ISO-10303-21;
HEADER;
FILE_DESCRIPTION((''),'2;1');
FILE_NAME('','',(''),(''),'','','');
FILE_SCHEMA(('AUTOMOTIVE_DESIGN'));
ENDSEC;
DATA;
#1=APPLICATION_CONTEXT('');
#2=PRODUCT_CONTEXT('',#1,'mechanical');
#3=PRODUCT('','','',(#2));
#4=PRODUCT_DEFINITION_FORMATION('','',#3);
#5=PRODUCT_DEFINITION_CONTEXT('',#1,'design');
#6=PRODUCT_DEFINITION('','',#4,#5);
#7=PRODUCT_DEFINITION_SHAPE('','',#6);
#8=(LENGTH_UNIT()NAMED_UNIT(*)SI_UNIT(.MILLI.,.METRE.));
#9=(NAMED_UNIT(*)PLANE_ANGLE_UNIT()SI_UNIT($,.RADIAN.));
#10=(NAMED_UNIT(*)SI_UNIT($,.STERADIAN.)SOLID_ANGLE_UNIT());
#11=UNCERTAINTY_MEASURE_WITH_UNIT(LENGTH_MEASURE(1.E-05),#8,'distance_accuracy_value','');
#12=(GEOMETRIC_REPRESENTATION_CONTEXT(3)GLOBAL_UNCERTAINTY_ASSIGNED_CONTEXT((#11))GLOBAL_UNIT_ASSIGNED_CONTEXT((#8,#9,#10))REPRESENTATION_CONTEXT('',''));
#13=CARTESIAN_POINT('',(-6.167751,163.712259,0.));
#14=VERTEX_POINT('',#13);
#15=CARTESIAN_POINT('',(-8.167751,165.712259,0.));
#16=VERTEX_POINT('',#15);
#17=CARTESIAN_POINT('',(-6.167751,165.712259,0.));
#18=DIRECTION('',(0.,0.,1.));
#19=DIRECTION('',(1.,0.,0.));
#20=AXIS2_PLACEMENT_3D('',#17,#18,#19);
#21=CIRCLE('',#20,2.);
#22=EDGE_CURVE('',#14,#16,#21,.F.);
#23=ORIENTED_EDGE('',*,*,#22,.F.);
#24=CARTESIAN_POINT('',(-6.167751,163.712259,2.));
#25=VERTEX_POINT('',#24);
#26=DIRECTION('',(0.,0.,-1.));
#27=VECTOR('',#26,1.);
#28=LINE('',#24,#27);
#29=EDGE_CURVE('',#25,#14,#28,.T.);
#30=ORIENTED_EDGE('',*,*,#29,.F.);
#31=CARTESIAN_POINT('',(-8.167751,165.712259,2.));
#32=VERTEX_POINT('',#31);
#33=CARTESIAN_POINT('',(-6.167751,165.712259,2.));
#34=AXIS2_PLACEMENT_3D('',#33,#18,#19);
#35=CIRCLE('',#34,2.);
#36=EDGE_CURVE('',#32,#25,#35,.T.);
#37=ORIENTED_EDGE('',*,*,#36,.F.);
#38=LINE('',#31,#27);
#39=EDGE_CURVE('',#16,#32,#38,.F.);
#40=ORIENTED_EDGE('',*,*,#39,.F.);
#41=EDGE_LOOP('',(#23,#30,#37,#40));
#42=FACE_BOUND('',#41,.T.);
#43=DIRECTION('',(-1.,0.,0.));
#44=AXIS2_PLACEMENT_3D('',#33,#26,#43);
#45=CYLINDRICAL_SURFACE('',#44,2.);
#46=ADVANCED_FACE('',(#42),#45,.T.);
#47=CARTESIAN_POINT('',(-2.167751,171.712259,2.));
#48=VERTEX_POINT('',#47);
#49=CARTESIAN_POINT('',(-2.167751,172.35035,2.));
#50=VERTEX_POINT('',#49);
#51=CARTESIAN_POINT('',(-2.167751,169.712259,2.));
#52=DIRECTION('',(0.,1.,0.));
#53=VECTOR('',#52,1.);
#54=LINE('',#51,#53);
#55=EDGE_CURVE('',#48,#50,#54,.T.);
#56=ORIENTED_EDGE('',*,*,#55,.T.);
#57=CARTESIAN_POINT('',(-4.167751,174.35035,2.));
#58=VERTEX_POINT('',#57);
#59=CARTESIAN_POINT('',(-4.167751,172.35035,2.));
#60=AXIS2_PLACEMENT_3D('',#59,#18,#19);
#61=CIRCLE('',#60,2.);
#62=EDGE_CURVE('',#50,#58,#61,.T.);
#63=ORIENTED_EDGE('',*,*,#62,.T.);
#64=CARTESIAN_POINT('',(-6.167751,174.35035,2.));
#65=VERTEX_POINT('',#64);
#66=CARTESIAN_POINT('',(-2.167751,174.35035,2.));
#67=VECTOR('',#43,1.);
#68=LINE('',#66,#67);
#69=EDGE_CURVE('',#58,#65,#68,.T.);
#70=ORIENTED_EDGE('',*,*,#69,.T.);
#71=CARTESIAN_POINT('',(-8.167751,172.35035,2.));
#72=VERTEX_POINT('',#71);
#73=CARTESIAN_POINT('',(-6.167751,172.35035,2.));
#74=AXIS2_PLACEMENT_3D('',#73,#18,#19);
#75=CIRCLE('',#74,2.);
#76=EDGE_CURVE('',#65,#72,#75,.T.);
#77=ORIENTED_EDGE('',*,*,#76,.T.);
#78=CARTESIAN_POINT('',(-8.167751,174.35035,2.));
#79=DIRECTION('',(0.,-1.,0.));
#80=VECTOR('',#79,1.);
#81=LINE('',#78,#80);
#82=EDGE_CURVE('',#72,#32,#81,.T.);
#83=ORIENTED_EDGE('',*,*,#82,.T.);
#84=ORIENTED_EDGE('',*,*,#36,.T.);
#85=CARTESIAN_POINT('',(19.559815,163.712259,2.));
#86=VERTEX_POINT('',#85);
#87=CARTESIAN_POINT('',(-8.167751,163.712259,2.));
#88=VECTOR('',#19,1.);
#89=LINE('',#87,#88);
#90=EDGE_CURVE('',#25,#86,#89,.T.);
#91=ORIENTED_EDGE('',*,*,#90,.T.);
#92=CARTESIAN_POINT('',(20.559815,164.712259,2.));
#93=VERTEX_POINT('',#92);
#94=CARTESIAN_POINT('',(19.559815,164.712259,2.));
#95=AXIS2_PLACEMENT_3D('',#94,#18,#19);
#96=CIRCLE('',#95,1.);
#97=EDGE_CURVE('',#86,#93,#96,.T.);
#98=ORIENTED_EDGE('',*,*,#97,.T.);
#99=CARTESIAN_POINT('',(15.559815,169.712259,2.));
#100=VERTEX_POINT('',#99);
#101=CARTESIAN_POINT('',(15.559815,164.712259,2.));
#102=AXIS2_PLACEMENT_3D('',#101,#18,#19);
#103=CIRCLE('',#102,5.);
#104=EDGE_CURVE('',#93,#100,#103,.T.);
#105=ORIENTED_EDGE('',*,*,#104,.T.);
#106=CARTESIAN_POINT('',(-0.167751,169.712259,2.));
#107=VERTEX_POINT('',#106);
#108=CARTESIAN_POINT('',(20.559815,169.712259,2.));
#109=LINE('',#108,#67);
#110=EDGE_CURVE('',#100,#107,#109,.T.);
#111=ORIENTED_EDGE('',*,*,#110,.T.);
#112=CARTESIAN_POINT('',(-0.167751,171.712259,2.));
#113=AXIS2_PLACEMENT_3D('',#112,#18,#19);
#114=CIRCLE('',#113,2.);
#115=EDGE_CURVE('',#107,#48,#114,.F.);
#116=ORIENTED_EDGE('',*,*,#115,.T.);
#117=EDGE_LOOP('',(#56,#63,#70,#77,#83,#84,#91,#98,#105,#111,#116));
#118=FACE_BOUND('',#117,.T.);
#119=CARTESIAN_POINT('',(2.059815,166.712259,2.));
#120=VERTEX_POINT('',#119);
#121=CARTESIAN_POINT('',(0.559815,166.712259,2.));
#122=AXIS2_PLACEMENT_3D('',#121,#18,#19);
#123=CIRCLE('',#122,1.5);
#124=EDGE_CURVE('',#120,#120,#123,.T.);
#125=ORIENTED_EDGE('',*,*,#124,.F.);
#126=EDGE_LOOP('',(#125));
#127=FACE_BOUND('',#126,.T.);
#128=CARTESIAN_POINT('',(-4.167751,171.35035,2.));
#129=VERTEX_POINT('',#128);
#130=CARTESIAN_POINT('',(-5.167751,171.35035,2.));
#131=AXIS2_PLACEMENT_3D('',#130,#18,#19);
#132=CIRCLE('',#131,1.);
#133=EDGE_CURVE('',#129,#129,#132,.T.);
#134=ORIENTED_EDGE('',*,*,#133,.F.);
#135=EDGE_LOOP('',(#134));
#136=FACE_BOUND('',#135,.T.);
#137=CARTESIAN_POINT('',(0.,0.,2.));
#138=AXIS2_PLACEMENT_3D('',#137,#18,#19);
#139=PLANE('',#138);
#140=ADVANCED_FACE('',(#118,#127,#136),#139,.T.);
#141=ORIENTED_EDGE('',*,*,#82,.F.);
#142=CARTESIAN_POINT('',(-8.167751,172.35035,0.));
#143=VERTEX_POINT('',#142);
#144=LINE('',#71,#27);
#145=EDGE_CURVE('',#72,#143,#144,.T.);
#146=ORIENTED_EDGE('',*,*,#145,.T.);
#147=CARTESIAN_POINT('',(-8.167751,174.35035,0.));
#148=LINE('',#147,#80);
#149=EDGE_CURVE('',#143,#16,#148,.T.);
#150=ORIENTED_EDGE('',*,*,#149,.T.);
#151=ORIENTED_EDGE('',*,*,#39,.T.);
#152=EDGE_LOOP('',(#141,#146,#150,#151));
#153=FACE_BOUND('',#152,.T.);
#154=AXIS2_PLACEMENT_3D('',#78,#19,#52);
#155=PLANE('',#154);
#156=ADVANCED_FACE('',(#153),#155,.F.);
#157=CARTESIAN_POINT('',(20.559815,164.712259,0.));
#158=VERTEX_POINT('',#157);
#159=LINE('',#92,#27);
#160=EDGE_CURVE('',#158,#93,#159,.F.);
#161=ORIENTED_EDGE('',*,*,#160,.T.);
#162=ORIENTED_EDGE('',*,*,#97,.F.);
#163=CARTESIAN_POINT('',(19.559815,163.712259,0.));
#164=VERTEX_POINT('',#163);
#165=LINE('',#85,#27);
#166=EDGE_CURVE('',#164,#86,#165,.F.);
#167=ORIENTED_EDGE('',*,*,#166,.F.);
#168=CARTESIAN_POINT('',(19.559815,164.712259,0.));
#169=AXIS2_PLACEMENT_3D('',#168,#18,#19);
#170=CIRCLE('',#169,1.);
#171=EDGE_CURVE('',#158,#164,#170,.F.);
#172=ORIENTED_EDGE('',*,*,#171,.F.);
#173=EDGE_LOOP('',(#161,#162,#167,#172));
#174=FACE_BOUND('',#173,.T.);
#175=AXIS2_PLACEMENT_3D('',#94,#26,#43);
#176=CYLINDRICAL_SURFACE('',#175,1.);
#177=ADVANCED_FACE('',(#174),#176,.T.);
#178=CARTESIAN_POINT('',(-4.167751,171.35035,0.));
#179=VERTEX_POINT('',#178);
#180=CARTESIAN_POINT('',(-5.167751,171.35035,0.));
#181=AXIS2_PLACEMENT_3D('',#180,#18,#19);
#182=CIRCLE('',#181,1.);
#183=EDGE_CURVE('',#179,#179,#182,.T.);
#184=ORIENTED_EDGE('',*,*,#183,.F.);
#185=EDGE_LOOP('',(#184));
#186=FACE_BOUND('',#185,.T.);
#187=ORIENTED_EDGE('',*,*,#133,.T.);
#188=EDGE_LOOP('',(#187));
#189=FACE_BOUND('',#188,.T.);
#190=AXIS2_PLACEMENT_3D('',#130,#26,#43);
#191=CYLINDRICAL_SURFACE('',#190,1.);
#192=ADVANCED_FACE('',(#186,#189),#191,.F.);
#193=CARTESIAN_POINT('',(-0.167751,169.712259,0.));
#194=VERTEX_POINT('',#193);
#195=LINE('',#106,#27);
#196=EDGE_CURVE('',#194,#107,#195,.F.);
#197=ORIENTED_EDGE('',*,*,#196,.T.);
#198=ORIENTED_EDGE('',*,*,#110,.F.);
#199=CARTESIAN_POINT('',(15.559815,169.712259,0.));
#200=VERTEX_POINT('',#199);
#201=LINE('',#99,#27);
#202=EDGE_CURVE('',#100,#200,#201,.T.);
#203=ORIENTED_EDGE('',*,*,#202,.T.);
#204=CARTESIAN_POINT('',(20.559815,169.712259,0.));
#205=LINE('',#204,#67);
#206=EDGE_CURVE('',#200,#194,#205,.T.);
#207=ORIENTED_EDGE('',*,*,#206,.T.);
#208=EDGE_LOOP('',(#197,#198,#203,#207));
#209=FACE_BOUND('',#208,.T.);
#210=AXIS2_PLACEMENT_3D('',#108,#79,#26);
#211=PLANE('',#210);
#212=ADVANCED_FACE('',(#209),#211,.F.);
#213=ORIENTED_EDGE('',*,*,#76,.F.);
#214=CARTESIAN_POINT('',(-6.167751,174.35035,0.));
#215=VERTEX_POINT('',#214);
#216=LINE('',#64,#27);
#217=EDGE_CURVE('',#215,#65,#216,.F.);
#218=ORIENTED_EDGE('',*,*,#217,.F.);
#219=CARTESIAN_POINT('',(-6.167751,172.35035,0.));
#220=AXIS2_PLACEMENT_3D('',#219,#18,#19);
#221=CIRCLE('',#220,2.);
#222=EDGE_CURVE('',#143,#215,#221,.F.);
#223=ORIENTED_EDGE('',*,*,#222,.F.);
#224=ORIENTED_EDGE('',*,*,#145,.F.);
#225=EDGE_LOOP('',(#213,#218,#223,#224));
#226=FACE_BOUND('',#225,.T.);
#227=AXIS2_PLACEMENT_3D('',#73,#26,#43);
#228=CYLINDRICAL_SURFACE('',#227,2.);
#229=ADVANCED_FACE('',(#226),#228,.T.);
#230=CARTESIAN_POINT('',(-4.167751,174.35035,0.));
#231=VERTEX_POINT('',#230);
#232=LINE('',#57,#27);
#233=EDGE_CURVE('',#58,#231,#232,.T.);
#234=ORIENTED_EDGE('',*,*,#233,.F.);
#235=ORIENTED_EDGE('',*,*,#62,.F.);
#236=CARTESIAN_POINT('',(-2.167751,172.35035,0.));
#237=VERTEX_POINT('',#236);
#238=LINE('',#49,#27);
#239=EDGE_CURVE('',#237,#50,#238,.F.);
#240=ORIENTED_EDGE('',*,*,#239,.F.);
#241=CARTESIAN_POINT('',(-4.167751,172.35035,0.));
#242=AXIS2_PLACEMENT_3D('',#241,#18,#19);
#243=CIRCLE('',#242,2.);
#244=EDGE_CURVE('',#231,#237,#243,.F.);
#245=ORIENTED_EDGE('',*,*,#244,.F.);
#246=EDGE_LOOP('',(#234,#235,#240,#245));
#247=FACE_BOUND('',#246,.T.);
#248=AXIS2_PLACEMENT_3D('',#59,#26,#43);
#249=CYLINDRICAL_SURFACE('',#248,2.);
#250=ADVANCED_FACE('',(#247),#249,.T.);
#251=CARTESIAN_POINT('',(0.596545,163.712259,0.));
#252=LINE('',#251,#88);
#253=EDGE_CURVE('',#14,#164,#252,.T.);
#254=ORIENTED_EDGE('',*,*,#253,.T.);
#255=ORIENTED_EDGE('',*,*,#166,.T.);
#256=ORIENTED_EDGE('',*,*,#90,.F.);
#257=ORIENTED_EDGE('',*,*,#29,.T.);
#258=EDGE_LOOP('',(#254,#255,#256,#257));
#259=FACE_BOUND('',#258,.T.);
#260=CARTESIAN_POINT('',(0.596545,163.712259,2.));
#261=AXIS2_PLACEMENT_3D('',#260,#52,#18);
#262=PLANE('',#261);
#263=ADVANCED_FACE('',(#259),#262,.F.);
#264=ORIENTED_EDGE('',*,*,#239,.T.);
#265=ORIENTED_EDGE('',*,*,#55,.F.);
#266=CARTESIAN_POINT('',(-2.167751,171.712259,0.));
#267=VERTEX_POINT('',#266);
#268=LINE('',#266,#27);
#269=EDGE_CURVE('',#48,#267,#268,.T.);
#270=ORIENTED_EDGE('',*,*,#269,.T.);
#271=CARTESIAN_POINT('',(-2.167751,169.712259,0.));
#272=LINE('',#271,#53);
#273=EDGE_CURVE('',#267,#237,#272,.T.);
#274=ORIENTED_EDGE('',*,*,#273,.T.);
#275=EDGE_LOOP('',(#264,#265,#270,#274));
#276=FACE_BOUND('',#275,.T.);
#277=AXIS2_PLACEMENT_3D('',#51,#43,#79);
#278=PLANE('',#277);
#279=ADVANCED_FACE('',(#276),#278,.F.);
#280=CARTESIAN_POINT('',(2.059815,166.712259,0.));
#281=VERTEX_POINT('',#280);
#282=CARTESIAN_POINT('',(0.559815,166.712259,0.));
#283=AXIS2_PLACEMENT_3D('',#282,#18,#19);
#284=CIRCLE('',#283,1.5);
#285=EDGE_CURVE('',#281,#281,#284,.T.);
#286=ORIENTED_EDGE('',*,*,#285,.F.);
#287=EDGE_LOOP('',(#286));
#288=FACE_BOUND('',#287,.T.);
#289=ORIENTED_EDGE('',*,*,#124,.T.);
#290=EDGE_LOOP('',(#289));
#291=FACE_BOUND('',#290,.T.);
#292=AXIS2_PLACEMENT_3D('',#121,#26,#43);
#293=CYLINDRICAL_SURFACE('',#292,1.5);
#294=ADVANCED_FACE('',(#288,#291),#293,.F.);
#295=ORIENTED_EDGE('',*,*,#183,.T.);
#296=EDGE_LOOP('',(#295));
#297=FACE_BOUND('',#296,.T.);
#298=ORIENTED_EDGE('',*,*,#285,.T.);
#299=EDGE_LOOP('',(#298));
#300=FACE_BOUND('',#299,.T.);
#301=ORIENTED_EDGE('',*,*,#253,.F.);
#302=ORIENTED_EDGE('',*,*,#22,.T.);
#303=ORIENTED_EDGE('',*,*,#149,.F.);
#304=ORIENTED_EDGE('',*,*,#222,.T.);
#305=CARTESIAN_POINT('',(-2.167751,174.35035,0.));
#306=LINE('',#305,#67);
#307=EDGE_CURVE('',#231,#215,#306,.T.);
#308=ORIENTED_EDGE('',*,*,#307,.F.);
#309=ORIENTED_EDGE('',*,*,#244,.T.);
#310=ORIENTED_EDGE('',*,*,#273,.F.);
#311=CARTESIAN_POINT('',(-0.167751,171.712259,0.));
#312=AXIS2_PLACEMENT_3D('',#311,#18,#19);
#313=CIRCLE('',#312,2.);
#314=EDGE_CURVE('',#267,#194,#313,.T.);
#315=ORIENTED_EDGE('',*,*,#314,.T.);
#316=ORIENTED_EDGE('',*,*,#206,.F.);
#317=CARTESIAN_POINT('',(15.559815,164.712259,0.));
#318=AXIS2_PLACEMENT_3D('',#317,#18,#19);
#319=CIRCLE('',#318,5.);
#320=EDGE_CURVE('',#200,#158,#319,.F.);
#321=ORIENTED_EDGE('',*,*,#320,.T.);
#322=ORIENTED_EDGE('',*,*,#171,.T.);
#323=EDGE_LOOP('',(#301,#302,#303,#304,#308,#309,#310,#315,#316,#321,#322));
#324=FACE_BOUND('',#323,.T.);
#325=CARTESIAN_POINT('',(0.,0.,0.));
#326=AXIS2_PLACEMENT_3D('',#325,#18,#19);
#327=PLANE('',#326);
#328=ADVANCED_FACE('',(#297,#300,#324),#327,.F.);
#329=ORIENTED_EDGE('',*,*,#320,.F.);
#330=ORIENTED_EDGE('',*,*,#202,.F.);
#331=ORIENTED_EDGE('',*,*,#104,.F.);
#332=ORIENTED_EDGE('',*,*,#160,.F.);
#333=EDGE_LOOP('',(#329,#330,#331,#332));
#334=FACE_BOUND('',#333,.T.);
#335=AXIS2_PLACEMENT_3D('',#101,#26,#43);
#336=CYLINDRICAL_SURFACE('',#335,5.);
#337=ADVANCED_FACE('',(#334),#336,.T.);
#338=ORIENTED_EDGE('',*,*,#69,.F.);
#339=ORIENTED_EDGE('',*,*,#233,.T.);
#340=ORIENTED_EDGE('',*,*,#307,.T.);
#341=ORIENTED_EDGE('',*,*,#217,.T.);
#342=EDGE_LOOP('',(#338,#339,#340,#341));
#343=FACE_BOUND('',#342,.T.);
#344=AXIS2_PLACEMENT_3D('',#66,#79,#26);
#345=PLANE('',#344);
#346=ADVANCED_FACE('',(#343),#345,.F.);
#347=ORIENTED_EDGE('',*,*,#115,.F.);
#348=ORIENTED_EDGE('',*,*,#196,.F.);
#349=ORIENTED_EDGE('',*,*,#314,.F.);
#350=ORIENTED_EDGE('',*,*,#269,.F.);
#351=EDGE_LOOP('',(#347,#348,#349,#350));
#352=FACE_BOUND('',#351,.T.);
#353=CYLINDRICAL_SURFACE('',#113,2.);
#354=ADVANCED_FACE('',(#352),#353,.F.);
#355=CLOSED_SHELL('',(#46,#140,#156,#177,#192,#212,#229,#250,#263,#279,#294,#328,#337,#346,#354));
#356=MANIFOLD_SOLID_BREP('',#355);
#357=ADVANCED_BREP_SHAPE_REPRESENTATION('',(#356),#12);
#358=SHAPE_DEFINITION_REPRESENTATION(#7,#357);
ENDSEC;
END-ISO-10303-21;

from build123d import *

# Parameters (mm, degrees)
SKETCH1_R           = 1.5
SKETCH1_R_2         = 1
BOSS_EXTRUDE1_DEPTH = 2
FILLET7_R           = 5
FILLET8_R           = 1
FILLET9_R           = 2


with BuildPart() as part:
    # Sketch1 → Boss-Extrude1 (new body)
    with BuildSketch(Plane.XY):
        Polygon((-2.167750967, 169.712259216), (-2.167750967, 174.350350498), (-8.167750967, 174.350350498), (-8.167750967, 163.712259216), (0.596545219, 163.712259216), (20.559814769, 163.712259216), (20.559814769, 169.712259216), align=None)
        with Locations((0.559814769, 166.712259216)):
            Circle(SKETCH1_R, mode=Mode.SUBTRACT)
        with Locations((-5.167750967, 171.350350498)):
            Circle(SKETCH1_R_2, mode=Mode.SUBTRACT)
    extrude(amount=BOSS_EXTRUDE1_DEPTH)

    # Fillet7
    fillet7_edges = [part.edges().sort_by_distance(p)[0] for p in [
        (20.559814769, 169.712259216, 1),
    ]]
    fillet(fillet7_edges, radius=FILLET7_R)

    # Fillet8
    fillet8_edges = [part.edges().sort_by_distance(p)[0] for p in [
        (20.559814769, 163.712259216, 1),
    ]]
    fillet(fillet8_edges, radius=FILLET8_R - 0.0001)  # a hair under: the kernel refuses the full size

    # Fillet9
    fillet9_edges = [part.edges().sort_by_distance(p)[0] for p in [
        (-8.167750967, 174.350350498, 1),
        (-2.167750967, 174.350350498, 1),
        (-2.167750967, 169.712259216, 1),
        (-8.167750967, 163.712259216, 1),
    ]]
    fillet(fillet9_edges, radius=FILLET9_R)


solid = part.part
